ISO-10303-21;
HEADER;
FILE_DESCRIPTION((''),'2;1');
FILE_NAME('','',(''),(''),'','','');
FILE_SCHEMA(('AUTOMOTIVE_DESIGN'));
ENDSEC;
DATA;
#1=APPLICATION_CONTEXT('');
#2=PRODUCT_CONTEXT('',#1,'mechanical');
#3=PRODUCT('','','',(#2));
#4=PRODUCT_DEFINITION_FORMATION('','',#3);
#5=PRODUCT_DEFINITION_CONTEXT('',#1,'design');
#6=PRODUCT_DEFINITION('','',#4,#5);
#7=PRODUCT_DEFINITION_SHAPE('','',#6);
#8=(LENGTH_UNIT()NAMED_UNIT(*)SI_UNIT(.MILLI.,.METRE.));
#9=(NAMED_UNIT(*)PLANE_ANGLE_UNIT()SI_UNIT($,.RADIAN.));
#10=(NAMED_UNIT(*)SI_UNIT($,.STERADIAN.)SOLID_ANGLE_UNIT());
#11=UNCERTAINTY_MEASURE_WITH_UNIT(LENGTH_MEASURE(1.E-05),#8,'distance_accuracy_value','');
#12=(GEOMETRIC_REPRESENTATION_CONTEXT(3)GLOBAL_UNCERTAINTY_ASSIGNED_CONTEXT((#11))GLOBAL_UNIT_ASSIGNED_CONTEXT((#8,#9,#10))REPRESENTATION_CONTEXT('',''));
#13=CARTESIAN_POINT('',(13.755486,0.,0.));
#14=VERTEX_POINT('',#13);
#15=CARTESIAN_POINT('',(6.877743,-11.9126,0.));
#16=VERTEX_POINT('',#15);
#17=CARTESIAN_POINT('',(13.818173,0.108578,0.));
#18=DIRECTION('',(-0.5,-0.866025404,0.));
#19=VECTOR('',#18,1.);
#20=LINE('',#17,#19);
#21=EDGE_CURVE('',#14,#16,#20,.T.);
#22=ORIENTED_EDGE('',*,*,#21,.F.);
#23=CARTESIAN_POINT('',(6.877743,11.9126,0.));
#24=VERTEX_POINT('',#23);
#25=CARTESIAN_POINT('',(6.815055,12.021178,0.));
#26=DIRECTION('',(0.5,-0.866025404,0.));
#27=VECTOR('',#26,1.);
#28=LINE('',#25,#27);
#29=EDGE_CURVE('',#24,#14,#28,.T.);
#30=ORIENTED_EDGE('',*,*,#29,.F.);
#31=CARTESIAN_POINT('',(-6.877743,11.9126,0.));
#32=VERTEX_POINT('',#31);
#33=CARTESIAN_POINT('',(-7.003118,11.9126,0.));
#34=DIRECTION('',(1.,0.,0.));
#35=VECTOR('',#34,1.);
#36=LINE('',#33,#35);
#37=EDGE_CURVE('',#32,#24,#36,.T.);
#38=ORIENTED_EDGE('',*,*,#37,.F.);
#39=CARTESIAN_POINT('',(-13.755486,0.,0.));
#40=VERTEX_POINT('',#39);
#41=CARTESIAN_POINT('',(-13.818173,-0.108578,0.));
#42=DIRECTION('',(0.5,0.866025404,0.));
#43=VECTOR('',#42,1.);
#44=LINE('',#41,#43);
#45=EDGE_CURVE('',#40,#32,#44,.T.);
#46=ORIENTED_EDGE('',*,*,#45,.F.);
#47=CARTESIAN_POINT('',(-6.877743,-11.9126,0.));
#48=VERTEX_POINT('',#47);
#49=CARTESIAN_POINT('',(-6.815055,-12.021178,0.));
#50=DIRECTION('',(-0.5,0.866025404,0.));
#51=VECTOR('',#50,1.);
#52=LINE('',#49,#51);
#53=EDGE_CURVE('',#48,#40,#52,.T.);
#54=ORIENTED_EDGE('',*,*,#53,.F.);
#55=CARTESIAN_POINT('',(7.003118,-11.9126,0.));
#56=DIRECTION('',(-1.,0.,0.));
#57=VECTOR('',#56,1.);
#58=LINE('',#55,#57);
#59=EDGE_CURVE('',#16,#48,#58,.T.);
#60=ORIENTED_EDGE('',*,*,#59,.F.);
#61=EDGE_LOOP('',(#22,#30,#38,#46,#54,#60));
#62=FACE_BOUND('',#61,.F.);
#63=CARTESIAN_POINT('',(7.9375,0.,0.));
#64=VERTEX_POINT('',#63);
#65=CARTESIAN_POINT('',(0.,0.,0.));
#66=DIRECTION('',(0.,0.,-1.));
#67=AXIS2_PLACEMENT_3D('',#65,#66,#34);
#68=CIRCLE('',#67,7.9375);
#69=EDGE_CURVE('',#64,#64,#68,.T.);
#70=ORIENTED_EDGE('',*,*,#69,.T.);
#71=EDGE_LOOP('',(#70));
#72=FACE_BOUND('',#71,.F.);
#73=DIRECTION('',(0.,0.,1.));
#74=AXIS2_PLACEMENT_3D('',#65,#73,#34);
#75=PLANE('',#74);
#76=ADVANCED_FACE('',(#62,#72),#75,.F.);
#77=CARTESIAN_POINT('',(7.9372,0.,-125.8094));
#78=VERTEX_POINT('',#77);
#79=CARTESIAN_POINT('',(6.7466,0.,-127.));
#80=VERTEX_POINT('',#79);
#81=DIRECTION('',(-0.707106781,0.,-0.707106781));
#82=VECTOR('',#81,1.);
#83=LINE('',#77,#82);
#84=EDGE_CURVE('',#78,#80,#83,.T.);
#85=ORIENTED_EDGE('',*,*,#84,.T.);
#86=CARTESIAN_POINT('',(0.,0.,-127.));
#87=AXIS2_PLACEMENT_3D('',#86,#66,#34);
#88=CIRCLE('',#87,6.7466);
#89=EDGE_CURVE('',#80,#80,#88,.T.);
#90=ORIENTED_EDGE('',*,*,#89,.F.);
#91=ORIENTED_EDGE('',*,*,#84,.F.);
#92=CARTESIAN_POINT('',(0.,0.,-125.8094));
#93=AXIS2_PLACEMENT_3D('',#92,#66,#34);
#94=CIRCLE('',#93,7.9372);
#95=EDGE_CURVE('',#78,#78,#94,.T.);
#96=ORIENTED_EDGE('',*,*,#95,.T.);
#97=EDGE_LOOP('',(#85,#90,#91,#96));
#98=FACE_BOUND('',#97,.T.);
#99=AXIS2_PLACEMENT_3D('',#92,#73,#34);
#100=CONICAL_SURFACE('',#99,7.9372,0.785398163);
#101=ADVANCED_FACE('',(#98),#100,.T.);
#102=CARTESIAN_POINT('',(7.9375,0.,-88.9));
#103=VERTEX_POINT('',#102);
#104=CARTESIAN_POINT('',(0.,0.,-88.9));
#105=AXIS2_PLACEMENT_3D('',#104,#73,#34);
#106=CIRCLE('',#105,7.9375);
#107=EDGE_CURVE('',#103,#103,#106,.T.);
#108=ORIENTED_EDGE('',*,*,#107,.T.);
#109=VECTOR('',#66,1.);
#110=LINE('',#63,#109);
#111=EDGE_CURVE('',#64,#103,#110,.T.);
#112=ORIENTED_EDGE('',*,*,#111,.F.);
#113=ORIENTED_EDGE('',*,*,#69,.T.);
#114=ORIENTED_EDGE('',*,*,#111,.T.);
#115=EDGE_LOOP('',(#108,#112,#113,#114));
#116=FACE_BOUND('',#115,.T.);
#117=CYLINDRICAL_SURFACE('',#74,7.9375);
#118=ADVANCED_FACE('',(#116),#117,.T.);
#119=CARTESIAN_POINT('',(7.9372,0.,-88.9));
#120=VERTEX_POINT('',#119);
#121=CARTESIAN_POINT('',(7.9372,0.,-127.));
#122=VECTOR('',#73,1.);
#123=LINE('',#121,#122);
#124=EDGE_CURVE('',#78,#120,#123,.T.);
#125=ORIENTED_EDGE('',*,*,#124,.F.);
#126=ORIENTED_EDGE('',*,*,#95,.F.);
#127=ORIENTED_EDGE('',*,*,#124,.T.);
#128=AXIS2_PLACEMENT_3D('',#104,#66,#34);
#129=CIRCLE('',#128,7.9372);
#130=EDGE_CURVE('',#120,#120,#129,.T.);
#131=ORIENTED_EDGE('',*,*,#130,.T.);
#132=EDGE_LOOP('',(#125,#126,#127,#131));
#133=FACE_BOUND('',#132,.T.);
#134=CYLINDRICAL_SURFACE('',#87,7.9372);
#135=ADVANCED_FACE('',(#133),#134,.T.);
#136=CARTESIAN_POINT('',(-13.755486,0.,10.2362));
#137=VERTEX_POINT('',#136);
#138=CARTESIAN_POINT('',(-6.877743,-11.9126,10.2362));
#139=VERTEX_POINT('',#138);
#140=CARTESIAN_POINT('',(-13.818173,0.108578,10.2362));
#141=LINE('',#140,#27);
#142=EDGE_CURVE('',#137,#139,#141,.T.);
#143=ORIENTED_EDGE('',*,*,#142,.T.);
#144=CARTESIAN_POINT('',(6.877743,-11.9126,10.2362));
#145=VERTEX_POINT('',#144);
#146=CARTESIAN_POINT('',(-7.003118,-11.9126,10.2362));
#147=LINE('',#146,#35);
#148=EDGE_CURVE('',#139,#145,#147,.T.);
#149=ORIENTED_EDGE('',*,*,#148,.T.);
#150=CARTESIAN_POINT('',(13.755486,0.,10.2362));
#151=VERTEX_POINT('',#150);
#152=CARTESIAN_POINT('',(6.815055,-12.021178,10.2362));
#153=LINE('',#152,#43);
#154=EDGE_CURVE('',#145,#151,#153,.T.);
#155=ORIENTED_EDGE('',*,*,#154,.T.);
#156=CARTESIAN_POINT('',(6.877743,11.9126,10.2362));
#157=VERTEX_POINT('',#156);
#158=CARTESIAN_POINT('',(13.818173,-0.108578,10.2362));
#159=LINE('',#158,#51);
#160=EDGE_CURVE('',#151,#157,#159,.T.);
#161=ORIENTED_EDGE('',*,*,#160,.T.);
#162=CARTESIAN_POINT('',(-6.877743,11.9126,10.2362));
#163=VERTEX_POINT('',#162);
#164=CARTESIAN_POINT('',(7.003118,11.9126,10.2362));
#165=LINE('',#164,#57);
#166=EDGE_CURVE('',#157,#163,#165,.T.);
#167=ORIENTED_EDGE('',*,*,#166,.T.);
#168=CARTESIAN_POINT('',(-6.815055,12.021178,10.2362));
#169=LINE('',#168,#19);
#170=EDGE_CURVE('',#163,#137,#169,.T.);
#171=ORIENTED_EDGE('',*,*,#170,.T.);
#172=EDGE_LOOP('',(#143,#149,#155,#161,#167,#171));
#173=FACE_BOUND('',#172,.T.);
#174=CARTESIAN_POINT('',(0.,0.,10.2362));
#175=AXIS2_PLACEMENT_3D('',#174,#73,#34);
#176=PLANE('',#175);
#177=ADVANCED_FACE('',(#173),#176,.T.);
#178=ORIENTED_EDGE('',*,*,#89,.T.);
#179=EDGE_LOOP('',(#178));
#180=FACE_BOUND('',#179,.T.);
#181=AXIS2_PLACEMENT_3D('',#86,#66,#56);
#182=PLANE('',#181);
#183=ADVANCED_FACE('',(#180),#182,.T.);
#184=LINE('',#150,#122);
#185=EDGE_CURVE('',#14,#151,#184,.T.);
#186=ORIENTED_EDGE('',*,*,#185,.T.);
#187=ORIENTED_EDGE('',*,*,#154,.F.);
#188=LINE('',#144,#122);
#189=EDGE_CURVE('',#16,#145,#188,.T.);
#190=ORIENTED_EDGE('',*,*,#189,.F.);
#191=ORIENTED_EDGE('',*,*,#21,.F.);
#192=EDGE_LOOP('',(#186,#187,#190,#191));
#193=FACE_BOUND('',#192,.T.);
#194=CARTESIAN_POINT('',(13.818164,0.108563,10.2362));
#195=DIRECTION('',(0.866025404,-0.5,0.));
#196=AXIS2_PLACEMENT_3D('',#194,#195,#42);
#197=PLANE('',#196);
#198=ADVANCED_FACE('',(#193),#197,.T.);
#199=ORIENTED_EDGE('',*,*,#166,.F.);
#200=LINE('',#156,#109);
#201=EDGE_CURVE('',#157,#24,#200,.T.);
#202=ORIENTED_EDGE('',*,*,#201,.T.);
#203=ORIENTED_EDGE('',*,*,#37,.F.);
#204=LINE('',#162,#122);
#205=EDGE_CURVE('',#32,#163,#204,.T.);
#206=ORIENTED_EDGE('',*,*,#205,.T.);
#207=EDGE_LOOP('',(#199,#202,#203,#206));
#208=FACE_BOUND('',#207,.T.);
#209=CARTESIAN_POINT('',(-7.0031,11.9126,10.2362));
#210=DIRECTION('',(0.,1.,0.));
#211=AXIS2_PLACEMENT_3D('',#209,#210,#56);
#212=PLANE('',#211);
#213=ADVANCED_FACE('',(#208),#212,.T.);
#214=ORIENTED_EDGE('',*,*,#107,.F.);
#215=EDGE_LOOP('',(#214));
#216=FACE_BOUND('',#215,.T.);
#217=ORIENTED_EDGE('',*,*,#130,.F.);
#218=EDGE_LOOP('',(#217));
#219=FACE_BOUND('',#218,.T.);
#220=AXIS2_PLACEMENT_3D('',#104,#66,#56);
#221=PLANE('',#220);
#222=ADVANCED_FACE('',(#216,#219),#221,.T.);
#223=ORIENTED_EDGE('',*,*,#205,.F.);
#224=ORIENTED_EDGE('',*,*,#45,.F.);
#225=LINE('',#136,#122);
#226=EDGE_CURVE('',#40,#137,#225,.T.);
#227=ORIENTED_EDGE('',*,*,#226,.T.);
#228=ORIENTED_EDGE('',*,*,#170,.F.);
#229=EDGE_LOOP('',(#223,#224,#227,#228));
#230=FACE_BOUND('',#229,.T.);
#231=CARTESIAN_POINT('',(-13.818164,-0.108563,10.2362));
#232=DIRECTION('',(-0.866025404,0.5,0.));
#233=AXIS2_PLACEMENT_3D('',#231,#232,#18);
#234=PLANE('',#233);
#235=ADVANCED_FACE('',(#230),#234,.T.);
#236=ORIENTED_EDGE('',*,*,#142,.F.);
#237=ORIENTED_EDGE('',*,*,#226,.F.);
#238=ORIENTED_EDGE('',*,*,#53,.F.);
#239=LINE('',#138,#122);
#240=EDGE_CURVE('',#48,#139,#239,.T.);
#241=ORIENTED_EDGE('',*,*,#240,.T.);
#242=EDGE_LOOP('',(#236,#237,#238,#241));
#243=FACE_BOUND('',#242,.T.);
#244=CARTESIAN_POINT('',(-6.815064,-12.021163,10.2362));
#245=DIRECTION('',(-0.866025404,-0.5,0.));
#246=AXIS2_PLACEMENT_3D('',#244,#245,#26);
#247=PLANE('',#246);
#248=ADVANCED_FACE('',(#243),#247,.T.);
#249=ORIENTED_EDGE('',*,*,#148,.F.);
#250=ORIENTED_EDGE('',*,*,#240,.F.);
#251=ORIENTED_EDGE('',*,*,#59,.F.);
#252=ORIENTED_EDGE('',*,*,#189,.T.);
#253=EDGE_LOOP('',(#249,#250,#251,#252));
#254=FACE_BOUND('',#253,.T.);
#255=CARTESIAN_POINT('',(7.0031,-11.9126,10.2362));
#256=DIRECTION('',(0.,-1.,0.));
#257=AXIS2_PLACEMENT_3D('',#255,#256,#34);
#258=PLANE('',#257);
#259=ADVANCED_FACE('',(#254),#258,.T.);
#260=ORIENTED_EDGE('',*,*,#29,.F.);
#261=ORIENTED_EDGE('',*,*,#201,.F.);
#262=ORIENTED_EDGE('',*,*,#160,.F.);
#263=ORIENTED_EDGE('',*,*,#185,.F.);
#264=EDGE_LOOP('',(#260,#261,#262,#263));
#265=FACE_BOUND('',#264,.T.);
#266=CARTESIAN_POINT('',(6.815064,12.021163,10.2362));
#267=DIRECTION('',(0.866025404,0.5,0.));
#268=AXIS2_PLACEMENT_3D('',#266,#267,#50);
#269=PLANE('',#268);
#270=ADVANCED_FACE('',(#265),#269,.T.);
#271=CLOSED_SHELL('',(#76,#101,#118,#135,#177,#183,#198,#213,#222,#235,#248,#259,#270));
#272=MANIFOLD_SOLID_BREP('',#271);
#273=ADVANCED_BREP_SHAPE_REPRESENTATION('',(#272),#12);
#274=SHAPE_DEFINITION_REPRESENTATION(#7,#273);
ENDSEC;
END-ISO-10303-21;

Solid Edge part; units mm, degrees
sketch "Sketch1" plane through (0, 0, 0) normal (0, 0, 1) x (1, 0, 0)
  circle A0 centre (0, 0) radius 13.8186
  dimension "D1" = 27.6372
extrude "Protrusion1" add sketch "Sketch1" along normal blind 10.2362
sketch "Sketch2" plane through (0, 0, 0) normal (0, 0, -1) x (1, 0, 0)
  circle A0 centre (0, 0) radius 7.9375
extrude "Protrusion2" add sketch "Sketch2" along normal blind 127
sketch "Sketch3" plane through (0, 0, -127) normal (0, 0, -1) x (1, 0, 0)
  circle A0 centre (0, 0) radius 7.9372
extrude "Cutout1" cut sketch "Sketch3" against normal blind 38.1 flip side to cut
chamfer "Chamfer_1" distance 1.1906 angle 45 1 edges at (-7.9372, 0, -127)
sketch "Sketch4" plane through (0, 0, 10.2362) normal (0, 0, 1) x (1, 0, 0)
  line L0 (-7.0031, 11.9126) -> (7.0031, 11.9126)
  dimension "D1" = 23.8252
extrude "Cutout2" cut sketch "Sketch4" against normal up to next material side at (0, 11.9626, 10.2362)
pattern_circular "Pattern1" count 6 over 360 about axis through (0, 0, 10.2362) along (0, 0, 1) of "Cutout2"
properties part number "24100378"
